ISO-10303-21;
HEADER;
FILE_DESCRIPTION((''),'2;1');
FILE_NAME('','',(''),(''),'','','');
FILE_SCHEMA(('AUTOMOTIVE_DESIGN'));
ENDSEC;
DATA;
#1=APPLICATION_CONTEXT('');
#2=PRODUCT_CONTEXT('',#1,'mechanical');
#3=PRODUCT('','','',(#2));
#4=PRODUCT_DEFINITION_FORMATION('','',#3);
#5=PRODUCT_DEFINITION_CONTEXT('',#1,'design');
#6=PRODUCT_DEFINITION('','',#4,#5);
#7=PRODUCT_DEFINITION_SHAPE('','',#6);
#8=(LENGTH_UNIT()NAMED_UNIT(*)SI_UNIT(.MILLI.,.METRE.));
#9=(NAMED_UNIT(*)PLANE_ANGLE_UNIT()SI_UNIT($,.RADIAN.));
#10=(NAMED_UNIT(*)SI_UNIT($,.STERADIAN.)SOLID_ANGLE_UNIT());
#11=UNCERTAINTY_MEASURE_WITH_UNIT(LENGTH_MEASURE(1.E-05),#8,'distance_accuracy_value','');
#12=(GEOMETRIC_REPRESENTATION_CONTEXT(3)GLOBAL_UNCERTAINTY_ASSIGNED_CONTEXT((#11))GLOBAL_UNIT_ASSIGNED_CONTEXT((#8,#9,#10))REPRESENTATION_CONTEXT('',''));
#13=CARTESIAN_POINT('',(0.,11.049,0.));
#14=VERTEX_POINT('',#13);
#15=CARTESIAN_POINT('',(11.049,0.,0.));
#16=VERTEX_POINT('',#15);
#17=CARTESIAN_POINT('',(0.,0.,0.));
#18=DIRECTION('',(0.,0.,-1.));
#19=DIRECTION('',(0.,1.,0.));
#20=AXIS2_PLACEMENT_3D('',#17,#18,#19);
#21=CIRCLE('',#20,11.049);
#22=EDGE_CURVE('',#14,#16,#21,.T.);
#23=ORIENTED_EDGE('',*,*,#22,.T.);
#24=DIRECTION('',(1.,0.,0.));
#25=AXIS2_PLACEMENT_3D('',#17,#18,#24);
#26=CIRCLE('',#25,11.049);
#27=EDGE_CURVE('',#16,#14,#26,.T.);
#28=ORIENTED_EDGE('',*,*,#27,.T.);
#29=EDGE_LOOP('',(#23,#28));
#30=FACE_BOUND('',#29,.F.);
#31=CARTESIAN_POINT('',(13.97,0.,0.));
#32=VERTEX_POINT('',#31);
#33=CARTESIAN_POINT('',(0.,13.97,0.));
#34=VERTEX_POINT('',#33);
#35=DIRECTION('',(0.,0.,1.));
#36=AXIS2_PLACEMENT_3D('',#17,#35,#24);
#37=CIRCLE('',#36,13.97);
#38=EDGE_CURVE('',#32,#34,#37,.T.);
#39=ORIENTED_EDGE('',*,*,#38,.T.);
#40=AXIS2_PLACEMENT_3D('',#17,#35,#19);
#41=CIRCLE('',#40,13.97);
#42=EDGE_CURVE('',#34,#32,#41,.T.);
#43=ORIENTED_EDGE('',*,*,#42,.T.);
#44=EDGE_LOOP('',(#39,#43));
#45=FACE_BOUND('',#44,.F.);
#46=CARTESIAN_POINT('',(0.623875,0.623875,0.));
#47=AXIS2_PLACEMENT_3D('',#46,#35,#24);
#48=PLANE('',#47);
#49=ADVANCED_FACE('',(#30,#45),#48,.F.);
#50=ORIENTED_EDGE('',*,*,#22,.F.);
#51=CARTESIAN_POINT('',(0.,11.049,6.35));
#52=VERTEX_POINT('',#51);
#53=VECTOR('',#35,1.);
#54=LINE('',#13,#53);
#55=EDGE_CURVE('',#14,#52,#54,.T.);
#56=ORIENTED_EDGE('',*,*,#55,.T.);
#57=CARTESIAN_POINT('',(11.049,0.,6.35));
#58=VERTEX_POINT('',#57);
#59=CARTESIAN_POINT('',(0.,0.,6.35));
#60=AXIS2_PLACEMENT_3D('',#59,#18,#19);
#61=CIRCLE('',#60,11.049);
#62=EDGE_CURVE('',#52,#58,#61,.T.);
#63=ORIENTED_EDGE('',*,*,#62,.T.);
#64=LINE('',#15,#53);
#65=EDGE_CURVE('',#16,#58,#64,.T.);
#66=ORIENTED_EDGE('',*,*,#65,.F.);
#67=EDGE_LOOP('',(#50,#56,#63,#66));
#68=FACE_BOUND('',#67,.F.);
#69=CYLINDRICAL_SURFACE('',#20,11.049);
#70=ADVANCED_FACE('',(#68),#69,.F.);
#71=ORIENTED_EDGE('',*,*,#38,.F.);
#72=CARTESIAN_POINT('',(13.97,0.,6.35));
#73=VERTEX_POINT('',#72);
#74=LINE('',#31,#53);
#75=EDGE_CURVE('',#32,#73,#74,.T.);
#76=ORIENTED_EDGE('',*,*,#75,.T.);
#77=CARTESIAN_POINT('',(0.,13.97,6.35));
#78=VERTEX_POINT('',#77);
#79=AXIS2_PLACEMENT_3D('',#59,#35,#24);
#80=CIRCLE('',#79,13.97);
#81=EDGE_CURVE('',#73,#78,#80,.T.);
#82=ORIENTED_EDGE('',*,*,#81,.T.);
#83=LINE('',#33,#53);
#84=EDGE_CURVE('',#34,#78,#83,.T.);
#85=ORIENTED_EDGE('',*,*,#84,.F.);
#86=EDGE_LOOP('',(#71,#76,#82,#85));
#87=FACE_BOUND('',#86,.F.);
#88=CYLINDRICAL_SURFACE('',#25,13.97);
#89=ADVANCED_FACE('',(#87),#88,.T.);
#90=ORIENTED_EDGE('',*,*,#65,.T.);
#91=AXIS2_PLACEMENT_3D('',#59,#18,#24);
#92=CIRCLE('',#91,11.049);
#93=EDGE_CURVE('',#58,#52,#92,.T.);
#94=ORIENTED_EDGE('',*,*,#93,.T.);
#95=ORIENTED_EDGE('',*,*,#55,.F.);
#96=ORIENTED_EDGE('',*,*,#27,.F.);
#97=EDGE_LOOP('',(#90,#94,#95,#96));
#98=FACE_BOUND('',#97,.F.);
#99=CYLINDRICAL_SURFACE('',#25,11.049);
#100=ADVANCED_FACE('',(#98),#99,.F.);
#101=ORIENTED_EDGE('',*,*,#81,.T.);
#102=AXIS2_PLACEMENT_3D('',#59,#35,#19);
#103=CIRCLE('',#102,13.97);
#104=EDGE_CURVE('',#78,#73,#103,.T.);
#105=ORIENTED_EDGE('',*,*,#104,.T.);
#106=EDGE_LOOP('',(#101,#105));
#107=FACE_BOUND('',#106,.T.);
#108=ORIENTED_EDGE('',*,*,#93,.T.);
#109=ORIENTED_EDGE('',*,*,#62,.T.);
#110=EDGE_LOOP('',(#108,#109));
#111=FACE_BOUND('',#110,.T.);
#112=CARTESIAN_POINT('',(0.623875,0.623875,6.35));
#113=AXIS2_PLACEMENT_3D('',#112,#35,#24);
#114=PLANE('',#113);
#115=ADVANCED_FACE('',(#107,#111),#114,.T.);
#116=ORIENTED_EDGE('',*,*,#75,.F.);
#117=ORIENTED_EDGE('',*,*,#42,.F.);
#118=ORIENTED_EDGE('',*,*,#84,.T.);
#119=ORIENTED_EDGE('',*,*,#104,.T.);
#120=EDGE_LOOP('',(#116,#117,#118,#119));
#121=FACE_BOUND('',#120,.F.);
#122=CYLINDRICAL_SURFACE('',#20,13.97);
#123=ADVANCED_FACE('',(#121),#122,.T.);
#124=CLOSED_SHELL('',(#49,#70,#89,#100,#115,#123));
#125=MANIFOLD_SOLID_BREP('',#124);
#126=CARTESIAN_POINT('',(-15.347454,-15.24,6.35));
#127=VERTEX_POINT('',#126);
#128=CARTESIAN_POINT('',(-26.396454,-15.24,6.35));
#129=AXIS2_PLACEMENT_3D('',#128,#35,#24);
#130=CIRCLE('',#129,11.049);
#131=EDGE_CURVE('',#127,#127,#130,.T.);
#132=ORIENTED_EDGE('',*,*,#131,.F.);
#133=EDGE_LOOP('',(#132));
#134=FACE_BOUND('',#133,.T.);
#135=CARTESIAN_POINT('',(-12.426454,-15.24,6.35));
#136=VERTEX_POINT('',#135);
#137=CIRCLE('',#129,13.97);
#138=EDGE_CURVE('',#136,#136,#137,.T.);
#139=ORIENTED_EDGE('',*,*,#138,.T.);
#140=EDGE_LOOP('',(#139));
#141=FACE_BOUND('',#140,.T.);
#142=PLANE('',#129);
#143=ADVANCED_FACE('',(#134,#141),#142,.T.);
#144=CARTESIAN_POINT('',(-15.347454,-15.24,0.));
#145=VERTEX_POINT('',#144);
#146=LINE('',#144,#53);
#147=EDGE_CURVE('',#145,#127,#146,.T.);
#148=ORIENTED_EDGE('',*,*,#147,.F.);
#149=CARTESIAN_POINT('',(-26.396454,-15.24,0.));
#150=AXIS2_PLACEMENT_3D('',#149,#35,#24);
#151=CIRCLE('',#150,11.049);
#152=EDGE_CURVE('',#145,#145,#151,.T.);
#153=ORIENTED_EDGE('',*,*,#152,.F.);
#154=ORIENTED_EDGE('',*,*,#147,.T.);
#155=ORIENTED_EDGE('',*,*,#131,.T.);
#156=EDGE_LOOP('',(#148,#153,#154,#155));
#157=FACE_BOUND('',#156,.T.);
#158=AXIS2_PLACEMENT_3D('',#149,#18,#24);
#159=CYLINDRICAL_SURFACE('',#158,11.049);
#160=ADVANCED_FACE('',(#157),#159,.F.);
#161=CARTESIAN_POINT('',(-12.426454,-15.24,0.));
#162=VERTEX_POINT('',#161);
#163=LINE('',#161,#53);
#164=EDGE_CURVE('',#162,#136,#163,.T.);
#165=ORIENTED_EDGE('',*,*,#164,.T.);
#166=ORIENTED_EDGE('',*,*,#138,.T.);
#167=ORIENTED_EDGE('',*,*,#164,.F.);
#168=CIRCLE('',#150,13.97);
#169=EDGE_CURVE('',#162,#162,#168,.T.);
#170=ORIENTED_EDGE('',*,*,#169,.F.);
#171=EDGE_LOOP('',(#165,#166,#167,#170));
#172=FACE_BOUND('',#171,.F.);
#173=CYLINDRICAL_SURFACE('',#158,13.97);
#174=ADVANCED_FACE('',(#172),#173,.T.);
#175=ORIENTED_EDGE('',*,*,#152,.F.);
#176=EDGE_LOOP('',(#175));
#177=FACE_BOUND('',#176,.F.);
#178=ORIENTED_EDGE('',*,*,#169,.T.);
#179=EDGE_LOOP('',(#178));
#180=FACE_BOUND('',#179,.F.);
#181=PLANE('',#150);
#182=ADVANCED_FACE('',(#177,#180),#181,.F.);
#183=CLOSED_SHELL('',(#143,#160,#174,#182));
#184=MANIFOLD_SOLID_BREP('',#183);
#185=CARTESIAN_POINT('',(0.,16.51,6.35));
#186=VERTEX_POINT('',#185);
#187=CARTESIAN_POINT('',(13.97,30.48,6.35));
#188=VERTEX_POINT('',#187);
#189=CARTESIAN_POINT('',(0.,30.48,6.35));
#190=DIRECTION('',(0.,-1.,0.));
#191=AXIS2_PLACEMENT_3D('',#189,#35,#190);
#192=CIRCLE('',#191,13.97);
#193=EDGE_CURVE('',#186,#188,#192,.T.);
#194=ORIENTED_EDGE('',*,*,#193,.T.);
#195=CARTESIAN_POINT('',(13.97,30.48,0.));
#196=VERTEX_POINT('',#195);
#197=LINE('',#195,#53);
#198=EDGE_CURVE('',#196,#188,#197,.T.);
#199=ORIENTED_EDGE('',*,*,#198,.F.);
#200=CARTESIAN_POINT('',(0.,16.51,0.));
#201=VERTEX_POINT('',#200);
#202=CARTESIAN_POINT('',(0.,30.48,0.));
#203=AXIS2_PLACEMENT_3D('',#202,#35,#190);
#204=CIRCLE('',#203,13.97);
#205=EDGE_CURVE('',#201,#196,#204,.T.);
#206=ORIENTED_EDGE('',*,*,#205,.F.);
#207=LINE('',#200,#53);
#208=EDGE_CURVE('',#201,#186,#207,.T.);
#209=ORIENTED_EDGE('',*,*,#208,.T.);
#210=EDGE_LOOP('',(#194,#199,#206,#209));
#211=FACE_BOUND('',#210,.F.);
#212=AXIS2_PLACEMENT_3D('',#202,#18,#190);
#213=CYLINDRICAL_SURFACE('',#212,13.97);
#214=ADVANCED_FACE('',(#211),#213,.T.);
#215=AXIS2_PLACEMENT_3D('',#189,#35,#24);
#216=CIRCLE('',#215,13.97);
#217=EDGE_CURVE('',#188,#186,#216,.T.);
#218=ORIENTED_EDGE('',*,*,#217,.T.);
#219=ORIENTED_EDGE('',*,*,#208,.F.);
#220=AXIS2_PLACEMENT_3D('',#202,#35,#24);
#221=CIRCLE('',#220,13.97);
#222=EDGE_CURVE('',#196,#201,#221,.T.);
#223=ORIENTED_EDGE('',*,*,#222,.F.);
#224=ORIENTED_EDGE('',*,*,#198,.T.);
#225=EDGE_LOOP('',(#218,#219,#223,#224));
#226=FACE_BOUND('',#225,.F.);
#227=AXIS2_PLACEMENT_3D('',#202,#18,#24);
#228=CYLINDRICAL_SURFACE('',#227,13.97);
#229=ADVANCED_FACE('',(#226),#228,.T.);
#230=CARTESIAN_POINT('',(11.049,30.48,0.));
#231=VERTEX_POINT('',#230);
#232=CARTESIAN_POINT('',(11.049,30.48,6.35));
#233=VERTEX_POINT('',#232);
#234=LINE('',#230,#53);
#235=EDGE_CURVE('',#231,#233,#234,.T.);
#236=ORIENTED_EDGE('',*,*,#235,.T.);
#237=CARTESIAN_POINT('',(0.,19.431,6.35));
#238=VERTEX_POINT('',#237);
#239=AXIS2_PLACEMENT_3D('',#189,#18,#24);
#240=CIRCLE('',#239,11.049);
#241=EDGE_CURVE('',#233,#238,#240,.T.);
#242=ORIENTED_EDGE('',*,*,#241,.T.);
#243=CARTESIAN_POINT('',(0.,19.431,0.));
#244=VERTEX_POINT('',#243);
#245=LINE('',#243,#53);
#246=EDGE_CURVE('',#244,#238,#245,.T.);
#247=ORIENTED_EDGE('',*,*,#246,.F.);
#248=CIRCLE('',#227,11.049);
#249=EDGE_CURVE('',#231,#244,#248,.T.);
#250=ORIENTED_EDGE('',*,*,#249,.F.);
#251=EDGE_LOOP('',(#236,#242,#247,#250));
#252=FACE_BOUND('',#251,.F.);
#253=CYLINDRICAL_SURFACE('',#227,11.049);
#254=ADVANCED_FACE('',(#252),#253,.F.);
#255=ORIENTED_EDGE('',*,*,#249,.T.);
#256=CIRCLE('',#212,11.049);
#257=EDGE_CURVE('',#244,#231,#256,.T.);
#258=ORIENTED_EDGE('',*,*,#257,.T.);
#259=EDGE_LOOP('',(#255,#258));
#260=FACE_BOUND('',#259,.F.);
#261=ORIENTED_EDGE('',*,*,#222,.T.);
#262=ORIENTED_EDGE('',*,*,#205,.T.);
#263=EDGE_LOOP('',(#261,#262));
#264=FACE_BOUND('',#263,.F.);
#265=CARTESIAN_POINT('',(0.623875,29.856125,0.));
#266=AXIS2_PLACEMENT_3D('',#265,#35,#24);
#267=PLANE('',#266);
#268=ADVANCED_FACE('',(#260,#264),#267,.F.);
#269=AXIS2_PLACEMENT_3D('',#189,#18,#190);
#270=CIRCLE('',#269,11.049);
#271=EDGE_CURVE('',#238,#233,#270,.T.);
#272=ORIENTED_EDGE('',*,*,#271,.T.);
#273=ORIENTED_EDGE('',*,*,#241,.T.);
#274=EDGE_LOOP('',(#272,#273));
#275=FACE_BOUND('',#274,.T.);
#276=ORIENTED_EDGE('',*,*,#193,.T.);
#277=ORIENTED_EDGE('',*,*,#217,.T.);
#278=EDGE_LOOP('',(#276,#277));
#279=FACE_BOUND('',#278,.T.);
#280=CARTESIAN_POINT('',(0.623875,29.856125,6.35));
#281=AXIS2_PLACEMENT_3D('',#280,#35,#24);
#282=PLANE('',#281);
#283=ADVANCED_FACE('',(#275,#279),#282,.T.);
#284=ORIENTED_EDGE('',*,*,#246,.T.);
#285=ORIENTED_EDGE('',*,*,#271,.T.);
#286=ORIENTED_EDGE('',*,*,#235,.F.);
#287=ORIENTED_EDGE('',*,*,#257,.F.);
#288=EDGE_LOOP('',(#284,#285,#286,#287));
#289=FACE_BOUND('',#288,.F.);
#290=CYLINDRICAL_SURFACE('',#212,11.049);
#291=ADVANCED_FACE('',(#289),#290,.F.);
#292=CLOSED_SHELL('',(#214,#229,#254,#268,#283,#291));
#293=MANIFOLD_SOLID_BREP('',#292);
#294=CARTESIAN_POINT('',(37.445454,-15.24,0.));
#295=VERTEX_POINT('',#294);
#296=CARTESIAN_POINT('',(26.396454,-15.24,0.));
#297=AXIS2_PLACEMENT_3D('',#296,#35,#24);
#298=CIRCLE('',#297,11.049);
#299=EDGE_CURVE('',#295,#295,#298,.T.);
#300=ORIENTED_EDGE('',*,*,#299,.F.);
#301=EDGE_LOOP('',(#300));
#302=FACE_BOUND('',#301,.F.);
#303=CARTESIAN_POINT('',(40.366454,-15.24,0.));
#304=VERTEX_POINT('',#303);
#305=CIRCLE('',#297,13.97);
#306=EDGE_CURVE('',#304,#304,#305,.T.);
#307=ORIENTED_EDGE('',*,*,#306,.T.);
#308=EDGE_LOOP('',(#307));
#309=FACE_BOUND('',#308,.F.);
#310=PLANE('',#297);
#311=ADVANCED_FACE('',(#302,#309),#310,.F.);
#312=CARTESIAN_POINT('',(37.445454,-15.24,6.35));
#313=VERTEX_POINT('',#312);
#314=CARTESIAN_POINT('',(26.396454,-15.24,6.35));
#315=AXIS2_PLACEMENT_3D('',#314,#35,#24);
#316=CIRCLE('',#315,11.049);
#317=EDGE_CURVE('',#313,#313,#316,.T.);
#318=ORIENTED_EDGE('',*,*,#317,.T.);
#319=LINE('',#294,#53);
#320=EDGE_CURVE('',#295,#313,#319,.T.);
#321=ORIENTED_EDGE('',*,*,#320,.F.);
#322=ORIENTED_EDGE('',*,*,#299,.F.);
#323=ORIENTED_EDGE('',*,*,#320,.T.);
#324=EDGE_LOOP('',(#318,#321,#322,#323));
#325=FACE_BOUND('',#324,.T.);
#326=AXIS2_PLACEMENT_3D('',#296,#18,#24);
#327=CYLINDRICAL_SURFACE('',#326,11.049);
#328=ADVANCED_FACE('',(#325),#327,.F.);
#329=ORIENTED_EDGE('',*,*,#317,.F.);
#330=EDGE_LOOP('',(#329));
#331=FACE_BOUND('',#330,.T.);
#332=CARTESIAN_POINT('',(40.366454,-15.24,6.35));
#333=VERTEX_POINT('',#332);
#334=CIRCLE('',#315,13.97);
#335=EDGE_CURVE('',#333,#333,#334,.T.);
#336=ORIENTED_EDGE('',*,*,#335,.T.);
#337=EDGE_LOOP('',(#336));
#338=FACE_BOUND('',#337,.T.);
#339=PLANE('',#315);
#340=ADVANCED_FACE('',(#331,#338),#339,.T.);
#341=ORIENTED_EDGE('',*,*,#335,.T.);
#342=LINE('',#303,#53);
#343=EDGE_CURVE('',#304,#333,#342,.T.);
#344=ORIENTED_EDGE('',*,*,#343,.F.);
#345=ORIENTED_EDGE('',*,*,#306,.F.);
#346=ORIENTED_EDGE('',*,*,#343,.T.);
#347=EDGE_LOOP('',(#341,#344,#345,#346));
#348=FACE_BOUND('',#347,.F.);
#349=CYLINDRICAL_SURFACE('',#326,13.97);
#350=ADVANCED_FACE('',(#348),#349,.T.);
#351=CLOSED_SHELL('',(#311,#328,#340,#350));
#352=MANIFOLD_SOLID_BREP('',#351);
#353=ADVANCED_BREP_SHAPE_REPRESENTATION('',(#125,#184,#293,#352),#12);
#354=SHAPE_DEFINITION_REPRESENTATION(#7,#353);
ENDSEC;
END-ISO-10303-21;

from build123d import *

# Parameters (mm, degrees)
F2_DEPTH = 6.35
F0_R     = 13.97
F0_R_2   = 11.049


# Not quite as in the source:
# - the program builds the solid bodies; features that only make, move or delete a surface that nothing else refers to are left out


with BuildPart() as f2:
    # F0 (on Top) → F2 (new body)
    with BuildSketch(Plane.XY):
        with BuildLine():
            ThreePointArc((13.97, 30.48), (-9.8782817332, 40.3582817332), (0, 16.51))
            ThreePointArc((0, 16.51), (9.8782817332, 20.6017182668), (13.97, 30.48))
        make_face()
        with BuildLine():
            ThreePointArc((11.049, 30.48), (7.8128228253, 22.6671771747), (0, 19.431))
            ThreePointArc((0, 19.431), (-7.8128228253, 38.2928228253), (11.049, 30.48))
        make_face(mode=Mode.SUBTRACT)
    extrude(amount=F2_DEPTH)


with BuildPart() as f2b:
    # F0 (on Top) → F2, piece 2 (new body)
    with BuildSketch(Plane.XY):
        with Locations((-26.3964543073, -15.24)):
            Circle(F0_R)
        with Locations((-26.3964543073, -15.24)):
            Circle(F0_R_2, mode=Mode.SUBTRACT)
    extrude(amount=F2_DEPTH)


with BuildPart() as f2c:
    # F0 (on Top) → F2, piece 3 (new body)
    with BuildSketch(Plane.XY):
        with Locations((26.3964543073, -15.24)):
            Circle(F0_R)
        with Locations((26.3964543073, -15.24)):
            Circle(F0_R_2, mode=Mode.SUBTRACT)
    extrude(amount=F2_DEPTH)


with BuildPart() as f2d:
    # F0 (on Top) → F2, piece 4 (new body)
    with BuildSketch(Plane.XY):
        with BuildLine():
            ThreePointArc((13.97, 0), (9.8782817332, 9.8782817332), (0, 13.97))
            ThreePointArc((0, 13.97), (-9.8782817332, -9.8782817332), (13.97, 0))
        make_face()
        with BuildLine():
            ThreePointArc((0, 11.049), (7.8128228253, 7.8128228253), (11.049, 0))
            ThreePointArc((11.049, 0), (-7.8128228253, -7.8128228253), (0, 11.049))
        make_face(mode=Mode.SUBTRACT)
    extrude(amount=F2_DEPTH)


solid = Compound([f2.part, f2b.part, f2c.part, f2d.part])
